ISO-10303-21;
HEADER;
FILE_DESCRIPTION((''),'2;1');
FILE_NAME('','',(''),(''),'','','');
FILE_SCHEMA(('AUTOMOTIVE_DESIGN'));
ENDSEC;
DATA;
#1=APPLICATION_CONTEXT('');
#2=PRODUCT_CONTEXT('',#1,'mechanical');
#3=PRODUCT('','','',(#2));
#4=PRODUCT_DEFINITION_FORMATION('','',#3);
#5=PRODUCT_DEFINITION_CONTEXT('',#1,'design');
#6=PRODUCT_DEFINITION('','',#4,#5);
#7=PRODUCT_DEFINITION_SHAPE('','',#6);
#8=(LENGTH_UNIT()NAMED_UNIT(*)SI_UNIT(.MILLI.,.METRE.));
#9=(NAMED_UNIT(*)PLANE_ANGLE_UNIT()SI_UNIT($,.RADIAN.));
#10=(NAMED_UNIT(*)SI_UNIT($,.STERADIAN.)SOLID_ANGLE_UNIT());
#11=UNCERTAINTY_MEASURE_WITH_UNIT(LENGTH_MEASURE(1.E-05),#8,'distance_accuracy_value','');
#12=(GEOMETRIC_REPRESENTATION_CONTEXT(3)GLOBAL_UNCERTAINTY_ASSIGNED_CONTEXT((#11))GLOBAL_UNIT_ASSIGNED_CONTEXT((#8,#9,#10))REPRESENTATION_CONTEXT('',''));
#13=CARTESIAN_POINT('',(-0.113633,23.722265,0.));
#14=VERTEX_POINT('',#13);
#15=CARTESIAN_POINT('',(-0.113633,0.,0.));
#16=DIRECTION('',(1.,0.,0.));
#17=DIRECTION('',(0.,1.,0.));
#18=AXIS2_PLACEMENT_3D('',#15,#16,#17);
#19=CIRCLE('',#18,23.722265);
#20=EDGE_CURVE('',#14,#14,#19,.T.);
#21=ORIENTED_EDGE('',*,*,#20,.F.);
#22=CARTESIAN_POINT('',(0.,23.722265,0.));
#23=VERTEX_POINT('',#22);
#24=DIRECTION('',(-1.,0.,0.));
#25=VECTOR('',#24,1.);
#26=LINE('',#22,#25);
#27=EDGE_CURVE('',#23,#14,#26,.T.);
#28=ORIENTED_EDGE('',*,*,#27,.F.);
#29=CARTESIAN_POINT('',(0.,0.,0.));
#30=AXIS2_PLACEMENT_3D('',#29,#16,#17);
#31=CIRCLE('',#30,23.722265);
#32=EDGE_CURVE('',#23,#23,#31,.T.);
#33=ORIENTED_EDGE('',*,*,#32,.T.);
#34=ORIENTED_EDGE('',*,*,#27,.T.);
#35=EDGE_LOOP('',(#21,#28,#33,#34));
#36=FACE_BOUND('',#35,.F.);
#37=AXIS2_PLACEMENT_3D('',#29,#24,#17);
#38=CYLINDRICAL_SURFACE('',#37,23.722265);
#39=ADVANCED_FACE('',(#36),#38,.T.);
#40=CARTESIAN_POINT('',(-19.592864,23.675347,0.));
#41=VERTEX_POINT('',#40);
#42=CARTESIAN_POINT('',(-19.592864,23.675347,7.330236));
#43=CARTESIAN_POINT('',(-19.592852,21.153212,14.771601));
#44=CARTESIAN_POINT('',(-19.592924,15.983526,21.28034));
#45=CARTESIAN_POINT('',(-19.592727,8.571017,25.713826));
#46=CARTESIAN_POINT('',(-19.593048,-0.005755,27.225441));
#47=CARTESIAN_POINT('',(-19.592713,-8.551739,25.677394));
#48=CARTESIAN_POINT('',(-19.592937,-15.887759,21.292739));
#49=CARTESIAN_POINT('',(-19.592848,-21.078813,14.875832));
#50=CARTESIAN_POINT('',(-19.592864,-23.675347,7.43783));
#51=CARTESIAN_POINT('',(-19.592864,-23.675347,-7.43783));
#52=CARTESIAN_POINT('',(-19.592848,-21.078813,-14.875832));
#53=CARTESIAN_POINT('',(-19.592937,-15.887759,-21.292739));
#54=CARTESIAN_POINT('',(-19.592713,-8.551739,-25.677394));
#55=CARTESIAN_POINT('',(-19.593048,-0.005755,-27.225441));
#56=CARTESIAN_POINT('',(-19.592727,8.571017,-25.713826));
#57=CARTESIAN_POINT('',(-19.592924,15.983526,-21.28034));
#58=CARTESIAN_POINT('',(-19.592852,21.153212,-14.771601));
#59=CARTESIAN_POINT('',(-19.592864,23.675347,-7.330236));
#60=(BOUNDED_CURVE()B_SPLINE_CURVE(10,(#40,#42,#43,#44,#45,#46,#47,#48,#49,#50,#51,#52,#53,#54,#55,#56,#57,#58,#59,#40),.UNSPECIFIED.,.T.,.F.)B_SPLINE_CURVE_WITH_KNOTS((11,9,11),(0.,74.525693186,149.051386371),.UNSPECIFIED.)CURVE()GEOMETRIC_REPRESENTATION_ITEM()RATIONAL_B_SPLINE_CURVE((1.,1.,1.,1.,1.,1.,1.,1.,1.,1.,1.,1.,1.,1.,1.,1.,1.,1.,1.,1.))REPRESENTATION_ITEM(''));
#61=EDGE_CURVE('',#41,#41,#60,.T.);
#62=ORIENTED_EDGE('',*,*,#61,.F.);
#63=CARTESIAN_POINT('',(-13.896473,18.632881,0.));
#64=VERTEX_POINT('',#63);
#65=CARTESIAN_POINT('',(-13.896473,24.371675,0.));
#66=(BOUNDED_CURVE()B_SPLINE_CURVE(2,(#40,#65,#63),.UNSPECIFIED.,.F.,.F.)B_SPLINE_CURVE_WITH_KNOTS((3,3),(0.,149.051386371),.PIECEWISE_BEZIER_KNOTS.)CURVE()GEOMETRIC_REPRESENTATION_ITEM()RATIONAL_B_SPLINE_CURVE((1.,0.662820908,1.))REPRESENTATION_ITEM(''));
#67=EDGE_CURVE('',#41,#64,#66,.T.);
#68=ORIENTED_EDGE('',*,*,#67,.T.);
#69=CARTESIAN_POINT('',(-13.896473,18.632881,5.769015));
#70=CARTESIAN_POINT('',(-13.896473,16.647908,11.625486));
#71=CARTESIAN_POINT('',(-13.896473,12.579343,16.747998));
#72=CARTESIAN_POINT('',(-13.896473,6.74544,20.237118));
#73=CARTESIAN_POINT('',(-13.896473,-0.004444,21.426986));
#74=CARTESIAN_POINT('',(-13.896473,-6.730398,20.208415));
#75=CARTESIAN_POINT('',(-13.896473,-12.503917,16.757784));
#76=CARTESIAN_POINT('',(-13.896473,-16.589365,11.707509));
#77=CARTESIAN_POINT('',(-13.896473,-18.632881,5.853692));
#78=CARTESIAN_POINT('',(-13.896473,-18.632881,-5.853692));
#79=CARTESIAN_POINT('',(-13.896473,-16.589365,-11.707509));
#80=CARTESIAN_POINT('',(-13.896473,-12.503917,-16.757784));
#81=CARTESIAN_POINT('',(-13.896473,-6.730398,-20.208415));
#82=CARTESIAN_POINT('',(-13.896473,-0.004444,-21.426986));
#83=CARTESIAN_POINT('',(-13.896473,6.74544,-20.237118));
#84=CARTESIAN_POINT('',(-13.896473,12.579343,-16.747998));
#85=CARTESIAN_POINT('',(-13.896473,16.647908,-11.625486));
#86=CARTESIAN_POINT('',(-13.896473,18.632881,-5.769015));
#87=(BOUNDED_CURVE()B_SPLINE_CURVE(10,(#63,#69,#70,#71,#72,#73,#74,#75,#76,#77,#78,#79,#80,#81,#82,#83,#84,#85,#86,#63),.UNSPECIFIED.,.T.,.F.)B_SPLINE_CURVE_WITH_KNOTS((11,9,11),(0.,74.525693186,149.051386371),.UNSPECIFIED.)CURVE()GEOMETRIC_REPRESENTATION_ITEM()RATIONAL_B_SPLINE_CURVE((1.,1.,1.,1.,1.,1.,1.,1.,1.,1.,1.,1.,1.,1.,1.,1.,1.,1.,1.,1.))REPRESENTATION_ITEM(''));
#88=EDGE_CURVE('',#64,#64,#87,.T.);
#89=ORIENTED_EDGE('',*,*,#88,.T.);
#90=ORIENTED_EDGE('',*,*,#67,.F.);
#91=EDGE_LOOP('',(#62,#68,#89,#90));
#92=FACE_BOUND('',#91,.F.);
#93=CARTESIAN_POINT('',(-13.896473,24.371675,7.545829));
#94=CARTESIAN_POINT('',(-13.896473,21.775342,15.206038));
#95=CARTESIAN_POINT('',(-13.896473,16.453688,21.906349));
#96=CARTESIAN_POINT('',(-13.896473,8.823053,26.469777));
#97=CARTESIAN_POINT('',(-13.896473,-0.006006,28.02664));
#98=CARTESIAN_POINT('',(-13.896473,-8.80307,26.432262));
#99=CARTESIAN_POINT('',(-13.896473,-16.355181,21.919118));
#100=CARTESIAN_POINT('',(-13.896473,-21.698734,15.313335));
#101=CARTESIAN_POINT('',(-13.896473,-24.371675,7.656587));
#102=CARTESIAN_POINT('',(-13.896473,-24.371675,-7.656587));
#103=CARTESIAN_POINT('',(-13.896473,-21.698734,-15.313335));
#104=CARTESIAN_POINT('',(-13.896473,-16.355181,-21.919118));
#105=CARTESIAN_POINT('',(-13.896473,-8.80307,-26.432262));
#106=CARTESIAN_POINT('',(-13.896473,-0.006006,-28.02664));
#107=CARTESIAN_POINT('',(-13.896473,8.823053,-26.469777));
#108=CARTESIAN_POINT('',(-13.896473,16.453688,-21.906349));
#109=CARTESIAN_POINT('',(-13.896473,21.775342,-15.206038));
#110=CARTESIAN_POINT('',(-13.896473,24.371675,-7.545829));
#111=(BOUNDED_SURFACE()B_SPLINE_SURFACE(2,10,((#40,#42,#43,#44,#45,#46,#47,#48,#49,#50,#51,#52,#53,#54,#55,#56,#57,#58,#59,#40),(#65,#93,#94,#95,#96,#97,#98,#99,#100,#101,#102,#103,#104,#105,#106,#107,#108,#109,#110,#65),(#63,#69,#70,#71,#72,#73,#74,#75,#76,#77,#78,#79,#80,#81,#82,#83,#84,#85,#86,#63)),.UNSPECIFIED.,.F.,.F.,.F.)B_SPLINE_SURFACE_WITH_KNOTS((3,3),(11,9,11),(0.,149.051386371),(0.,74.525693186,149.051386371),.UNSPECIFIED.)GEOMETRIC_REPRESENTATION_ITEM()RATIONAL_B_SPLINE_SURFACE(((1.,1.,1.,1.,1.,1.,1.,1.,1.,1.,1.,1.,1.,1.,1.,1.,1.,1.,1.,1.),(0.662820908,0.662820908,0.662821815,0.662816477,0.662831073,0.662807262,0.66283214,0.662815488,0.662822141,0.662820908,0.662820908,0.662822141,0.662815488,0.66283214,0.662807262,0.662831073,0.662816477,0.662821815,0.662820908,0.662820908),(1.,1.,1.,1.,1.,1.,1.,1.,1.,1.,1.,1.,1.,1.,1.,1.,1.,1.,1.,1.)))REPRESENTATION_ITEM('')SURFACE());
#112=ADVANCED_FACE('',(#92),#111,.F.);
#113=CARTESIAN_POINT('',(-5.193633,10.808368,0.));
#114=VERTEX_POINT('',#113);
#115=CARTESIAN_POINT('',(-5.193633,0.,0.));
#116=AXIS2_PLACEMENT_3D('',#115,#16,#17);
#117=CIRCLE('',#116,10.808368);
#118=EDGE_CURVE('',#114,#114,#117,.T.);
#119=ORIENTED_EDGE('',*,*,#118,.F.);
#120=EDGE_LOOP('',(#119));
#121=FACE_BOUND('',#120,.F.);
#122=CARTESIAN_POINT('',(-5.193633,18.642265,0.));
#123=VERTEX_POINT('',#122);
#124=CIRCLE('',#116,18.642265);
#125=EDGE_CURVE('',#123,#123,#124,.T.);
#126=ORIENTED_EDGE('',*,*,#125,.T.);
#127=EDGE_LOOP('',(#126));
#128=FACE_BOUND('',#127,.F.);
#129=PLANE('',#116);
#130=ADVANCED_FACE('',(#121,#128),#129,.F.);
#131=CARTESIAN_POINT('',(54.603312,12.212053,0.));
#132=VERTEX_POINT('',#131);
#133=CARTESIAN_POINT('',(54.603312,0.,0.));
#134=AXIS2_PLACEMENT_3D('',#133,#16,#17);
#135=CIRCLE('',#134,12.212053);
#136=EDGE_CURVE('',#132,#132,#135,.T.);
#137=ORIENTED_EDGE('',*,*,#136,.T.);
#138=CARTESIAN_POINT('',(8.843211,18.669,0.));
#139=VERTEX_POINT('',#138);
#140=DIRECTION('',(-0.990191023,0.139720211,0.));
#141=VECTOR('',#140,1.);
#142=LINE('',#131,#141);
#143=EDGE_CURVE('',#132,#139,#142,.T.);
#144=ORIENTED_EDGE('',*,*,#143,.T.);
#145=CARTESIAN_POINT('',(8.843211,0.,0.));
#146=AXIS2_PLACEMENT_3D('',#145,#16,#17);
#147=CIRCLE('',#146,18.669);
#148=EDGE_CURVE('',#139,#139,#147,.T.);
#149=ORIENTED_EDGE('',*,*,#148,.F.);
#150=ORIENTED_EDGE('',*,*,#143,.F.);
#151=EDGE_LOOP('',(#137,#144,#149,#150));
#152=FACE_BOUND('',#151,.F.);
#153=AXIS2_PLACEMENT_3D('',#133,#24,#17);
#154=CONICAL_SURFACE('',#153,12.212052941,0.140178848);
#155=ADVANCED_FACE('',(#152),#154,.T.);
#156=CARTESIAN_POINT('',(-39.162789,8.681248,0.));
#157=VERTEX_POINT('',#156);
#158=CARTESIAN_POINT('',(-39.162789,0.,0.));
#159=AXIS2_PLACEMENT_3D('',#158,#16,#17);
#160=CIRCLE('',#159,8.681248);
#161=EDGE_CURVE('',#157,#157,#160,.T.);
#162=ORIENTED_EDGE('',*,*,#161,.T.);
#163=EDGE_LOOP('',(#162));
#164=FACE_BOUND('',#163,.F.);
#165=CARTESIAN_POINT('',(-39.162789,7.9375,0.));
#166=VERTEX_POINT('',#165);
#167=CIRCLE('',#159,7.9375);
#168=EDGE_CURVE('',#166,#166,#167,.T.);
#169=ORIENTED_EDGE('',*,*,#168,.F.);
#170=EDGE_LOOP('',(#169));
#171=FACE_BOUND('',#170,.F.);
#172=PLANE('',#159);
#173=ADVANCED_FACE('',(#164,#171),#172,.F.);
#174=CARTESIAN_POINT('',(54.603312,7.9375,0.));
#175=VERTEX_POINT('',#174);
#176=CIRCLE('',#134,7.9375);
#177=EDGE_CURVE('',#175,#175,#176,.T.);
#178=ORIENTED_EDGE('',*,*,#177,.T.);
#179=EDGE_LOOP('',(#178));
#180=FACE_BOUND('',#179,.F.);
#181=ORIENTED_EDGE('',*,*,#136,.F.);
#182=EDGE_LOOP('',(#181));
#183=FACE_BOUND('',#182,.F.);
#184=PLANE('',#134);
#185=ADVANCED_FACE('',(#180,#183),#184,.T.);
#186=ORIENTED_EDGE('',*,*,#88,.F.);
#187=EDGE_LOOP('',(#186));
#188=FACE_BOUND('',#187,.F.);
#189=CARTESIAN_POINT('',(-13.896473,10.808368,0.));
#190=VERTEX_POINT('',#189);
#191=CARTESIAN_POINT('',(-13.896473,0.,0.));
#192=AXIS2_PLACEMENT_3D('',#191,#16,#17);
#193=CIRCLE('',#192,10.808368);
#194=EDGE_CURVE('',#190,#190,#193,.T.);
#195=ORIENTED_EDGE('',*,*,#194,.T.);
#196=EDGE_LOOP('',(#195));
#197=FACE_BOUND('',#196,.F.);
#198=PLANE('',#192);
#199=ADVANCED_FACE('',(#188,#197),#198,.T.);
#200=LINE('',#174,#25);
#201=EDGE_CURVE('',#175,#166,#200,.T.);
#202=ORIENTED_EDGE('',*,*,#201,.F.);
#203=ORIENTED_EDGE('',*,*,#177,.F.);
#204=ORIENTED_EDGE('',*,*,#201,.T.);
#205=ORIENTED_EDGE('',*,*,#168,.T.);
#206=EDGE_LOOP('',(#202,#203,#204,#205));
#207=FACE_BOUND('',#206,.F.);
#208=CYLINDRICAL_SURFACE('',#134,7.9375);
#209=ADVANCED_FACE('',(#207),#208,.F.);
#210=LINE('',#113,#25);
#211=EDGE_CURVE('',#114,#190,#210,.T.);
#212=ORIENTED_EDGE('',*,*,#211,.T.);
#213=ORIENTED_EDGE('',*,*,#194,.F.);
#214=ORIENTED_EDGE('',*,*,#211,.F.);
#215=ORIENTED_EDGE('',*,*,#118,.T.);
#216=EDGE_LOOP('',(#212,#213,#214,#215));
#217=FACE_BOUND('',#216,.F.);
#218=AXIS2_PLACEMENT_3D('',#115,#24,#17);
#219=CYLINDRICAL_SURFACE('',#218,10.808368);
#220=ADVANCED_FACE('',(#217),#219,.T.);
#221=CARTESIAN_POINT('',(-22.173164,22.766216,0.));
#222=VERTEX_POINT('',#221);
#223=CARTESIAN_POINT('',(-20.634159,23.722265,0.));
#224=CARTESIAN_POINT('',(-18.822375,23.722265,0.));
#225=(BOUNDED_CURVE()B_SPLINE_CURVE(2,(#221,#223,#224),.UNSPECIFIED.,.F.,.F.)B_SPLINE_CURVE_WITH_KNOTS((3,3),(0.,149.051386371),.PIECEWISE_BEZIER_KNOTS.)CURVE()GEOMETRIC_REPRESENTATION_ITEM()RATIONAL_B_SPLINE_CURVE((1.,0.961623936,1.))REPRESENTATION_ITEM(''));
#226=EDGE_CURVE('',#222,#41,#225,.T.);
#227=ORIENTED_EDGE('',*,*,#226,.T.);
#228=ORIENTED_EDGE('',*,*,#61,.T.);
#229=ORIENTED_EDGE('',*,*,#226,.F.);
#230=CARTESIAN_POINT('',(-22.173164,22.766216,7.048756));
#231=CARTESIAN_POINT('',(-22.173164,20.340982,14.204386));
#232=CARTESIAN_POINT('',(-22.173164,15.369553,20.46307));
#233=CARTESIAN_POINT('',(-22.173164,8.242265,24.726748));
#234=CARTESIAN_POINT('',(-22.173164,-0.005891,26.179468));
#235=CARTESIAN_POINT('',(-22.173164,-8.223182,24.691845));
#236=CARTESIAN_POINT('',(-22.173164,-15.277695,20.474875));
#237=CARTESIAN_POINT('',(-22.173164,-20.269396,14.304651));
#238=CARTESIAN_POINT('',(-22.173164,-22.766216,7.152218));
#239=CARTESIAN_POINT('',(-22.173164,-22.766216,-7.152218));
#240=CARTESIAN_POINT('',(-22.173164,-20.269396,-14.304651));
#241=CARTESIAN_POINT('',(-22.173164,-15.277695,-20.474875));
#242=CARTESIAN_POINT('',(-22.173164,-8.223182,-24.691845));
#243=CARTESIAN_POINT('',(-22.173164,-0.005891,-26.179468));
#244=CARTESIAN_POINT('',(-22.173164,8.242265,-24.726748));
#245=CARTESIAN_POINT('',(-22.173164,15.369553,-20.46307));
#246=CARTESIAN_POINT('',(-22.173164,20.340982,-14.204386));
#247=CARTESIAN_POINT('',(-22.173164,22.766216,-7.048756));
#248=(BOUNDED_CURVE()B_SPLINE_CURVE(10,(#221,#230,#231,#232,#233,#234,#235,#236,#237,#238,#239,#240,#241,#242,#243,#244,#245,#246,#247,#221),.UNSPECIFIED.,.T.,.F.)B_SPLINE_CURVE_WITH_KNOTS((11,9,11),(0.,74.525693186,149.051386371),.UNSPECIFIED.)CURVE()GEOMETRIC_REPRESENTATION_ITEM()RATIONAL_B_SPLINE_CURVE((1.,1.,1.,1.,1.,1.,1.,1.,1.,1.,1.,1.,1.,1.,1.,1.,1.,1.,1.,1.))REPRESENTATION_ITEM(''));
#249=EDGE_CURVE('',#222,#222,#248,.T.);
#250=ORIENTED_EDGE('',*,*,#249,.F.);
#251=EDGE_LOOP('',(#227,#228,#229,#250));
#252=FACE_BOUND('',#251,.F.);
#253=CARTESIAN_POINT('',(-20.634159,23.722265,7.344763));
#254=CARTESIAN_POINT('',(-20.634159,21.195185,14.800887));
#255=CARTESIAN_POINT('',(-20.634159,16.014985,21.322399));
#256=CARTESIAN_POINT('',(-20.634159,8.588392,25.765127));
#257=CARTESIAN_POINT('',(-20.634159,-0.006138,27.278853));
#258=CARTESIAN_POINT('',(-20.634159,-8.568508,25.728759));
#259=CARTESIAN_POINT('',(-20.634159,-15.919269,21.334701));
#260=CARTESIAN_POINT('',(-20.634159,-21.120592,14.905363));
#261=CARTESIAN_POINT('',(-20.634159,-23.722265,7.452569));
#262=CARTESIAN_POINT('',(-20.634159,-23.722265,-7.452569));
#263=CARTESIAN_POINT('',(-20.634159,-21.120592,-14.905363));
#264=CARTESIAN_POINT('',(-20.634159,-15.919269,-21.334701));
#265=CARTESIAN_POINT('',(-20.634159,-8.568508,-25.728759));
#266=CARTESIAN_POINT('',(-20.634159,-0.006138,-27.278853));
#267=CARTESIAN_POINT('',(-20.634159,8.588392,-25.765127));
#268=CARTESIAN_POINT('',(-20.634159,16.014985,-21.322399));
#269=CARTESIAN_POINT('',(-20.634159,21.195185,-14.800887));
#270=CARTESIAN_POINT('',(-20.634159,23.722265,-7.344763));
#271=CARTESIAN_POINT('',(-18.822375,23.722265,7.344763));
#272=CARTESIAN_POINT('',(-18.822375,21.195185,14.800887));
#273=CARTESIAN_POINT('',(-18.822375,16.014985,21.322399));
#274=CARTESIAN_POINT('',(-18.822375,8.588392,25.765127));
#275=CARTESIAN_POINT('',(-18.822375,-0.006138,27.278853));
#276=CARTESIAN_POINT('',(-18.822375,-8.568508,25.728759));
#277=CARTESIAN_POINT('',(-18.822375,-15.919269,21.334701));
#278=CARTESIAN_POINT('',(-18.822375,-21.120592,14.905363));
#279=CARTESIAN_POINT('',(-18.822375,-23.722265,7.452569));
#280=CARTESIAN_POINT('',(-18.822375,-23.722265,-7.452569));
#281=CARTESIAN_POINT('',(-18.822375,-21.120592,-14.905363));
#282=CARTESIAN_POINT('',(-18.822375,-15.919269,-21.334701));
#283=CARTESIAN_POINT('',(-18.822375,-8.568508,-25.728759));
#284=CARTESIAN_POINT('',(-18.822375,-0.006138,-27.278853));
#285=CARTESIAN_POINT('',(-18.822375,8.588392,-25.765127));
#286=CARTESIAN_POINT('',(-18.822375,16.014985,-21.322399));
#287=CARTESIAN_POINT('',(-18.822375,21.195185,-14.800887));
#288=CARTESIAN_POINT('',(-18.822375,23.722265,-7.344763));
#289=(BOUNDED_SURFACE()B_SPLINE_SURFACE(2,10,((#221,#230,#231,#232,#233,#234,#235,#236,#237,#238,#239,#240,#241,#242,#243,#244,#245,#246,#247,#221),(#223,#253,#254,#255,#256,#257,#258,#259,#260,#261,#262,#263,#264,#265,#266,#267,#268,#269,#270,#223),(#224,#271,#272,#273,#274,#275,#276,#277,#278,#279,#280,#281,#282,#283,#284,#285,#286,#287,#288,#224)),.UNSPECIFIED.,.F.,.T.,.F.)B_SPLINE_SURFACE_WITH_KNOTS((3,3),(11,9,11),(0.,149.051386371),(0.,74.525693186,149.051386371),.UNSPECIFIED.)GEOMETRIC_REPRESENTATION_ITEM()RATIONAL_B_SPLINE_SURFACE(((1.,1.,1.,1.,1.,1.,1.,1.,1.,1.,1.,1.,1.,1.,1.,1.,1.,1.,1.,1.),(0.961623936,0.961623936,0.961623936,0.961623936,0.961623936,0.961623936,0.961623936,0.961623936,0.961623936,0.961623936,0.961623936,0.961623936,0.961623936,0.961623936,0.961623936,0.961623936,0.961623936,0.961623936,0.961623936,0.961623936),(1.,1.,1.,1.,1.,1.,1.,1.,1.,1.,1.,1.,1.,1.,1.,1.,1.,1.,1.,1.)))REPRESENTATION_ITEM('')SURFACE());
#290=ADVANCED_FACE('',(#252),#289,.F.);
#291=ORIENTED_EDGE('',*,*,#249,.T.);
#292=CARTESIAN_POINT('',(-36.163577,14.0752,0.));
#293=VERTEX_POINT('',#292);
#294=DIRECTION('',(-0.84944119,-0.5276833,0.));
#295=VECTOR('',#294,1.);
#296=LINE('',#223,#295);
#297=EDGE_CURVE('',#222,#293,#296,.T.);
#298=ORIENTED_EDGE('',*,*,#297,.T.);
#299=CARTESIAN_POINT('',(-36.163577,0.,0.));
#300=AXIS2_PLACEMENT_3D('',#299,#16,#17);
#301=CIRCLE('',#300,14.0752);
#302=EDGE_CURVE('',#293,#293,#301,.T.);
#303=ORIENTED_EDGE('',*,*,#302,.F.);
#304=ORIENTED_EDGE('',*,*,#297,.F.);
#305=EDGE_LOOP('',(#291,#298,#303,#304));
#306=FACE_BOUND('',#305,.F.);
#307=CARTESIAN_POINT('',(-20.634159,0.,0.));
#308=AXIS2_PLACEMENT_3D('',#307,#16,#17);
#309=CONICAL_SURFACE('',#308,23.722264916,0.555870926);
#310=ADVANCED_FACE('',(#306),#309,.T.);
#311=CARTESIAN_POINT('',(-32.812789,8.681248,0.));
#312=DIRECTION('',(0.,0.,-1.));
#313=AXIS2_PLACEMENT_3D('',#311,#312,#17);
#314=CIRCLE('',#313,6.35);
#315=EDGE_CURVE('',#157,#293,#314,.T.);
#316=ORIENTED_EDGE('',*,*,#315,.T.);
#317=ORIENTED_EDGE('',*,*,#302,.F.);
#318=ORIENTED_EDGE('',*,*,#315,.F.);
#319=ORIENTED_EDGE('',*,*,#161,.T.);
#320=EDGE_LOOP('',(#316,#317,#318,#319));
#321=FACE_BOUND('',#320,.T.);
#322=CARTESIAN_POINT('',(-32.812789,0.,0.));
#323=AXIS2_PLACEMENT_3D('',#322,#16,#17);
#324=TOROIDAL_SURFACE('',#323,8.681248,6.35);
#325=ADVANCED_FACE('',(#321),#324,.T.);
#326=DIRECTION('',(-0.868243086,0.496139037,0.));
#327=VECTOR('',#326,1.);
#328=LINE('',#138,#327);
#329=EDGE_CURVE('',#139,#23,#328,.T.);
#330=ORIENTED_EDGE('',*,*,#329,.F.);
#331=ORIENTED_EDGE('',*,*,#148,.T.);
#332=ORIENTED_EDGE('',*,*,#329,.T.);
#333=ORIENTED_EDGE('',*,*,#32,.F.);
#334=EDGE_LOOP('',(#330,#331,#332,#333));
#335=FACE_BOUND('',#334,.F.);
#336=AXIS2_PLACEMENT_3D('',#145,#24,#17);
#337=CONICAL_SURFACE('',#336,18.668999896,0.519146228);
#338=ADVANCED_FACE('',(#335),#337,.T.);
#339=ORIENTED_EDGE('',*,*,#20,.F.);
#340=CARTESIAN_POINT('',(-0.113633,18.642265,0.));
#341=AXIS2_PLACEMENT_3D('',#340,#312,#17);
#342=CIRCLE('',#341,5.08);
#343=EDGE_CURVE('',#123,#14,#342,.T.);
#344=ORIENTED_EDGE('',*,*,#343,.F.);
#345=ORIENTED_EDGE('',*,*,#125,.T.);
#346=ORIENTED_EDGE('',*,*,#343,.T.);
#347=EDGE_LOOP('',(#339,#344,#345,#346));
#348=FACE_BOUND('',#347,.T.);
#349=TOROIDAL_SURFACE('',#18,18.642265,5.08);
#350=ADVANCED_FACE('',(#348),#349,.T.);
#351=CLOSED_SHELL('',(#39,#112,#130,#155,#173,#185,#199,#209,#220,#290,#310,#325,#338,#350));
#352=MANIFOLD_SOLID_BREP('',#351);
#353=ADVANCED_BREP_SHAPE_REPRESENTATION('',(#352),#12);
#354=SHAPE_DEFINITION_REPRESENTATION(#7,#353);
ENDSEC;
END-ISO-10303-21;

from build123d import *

# Parameters (mm, degrees)
F2_F1_R  = 6.35
F2_F2_R  = 6.35
F3_R     = 7.9375
F4_DEPTH = 93.7661007047
F6_R     = 5.08


# Not quite as in the source:
# - two fillets or chamfers of one size are made in one step


with BuildPart() as f1:
    # F0 (on Top) → F1 (revolve)
    with BuildSketch(Plane.XY):
        Polygon((-39.1627885401, 12.2120529413), (-39.1627885401, 0), (54.6033121645, 0), (54.6033121645, 12.2120529413), (8.8432114571, 18.6689998955), (0, 23.7222649157), (-5.1936330274, 23.7222649157), (-5.1936330274, 10.8083682135), (-13.8964727521, 10.8083682135), (-13.8964727521, 23.7222649157), (-20.6341594458, 23.7222649157), align=None)
    revolve(axis=Axis((7.7202618122, 0, 0), (1, 0, 0)))

    # F2: fillet of radius 6.35 on 2 edges, made by hand

    # F2_f1
    f2_f1_edges = [f1.edges().sort_by_distance(p)[0] for p in [
        (-39.1627885401, -12.2120529413, 0),
    ]]
    fillet(f2_f1_edges, radius=F2_F1_R)

    # F2_f2
    f2_f2_edges = [f1.edges().sort_by_distance(p)[0] for p in [
        (-20.6341594458, -23.7222649157, 0),
    ]]
    fillet(f2_f2_edges, radius=F2_F2_R)

    # F3 (on face) → F4 (cut, through all)
    with BuildSketch(Plane.YZ.offset(54.6033121645)):
        Circle(F3_R)
    extrude(amount=-F4_DEPTH, mode=Mode.SUBTRACT)

    # F6
    f6_edges = [f1.edges().sort_by_distance(p)[0] for p in [
        (-13.896473, -23.722265, 0),
        (-5.193633, -23.722265, 0),
    ]]
    fillet(f6_edges, radius=F6_R)


solid = f1.part
